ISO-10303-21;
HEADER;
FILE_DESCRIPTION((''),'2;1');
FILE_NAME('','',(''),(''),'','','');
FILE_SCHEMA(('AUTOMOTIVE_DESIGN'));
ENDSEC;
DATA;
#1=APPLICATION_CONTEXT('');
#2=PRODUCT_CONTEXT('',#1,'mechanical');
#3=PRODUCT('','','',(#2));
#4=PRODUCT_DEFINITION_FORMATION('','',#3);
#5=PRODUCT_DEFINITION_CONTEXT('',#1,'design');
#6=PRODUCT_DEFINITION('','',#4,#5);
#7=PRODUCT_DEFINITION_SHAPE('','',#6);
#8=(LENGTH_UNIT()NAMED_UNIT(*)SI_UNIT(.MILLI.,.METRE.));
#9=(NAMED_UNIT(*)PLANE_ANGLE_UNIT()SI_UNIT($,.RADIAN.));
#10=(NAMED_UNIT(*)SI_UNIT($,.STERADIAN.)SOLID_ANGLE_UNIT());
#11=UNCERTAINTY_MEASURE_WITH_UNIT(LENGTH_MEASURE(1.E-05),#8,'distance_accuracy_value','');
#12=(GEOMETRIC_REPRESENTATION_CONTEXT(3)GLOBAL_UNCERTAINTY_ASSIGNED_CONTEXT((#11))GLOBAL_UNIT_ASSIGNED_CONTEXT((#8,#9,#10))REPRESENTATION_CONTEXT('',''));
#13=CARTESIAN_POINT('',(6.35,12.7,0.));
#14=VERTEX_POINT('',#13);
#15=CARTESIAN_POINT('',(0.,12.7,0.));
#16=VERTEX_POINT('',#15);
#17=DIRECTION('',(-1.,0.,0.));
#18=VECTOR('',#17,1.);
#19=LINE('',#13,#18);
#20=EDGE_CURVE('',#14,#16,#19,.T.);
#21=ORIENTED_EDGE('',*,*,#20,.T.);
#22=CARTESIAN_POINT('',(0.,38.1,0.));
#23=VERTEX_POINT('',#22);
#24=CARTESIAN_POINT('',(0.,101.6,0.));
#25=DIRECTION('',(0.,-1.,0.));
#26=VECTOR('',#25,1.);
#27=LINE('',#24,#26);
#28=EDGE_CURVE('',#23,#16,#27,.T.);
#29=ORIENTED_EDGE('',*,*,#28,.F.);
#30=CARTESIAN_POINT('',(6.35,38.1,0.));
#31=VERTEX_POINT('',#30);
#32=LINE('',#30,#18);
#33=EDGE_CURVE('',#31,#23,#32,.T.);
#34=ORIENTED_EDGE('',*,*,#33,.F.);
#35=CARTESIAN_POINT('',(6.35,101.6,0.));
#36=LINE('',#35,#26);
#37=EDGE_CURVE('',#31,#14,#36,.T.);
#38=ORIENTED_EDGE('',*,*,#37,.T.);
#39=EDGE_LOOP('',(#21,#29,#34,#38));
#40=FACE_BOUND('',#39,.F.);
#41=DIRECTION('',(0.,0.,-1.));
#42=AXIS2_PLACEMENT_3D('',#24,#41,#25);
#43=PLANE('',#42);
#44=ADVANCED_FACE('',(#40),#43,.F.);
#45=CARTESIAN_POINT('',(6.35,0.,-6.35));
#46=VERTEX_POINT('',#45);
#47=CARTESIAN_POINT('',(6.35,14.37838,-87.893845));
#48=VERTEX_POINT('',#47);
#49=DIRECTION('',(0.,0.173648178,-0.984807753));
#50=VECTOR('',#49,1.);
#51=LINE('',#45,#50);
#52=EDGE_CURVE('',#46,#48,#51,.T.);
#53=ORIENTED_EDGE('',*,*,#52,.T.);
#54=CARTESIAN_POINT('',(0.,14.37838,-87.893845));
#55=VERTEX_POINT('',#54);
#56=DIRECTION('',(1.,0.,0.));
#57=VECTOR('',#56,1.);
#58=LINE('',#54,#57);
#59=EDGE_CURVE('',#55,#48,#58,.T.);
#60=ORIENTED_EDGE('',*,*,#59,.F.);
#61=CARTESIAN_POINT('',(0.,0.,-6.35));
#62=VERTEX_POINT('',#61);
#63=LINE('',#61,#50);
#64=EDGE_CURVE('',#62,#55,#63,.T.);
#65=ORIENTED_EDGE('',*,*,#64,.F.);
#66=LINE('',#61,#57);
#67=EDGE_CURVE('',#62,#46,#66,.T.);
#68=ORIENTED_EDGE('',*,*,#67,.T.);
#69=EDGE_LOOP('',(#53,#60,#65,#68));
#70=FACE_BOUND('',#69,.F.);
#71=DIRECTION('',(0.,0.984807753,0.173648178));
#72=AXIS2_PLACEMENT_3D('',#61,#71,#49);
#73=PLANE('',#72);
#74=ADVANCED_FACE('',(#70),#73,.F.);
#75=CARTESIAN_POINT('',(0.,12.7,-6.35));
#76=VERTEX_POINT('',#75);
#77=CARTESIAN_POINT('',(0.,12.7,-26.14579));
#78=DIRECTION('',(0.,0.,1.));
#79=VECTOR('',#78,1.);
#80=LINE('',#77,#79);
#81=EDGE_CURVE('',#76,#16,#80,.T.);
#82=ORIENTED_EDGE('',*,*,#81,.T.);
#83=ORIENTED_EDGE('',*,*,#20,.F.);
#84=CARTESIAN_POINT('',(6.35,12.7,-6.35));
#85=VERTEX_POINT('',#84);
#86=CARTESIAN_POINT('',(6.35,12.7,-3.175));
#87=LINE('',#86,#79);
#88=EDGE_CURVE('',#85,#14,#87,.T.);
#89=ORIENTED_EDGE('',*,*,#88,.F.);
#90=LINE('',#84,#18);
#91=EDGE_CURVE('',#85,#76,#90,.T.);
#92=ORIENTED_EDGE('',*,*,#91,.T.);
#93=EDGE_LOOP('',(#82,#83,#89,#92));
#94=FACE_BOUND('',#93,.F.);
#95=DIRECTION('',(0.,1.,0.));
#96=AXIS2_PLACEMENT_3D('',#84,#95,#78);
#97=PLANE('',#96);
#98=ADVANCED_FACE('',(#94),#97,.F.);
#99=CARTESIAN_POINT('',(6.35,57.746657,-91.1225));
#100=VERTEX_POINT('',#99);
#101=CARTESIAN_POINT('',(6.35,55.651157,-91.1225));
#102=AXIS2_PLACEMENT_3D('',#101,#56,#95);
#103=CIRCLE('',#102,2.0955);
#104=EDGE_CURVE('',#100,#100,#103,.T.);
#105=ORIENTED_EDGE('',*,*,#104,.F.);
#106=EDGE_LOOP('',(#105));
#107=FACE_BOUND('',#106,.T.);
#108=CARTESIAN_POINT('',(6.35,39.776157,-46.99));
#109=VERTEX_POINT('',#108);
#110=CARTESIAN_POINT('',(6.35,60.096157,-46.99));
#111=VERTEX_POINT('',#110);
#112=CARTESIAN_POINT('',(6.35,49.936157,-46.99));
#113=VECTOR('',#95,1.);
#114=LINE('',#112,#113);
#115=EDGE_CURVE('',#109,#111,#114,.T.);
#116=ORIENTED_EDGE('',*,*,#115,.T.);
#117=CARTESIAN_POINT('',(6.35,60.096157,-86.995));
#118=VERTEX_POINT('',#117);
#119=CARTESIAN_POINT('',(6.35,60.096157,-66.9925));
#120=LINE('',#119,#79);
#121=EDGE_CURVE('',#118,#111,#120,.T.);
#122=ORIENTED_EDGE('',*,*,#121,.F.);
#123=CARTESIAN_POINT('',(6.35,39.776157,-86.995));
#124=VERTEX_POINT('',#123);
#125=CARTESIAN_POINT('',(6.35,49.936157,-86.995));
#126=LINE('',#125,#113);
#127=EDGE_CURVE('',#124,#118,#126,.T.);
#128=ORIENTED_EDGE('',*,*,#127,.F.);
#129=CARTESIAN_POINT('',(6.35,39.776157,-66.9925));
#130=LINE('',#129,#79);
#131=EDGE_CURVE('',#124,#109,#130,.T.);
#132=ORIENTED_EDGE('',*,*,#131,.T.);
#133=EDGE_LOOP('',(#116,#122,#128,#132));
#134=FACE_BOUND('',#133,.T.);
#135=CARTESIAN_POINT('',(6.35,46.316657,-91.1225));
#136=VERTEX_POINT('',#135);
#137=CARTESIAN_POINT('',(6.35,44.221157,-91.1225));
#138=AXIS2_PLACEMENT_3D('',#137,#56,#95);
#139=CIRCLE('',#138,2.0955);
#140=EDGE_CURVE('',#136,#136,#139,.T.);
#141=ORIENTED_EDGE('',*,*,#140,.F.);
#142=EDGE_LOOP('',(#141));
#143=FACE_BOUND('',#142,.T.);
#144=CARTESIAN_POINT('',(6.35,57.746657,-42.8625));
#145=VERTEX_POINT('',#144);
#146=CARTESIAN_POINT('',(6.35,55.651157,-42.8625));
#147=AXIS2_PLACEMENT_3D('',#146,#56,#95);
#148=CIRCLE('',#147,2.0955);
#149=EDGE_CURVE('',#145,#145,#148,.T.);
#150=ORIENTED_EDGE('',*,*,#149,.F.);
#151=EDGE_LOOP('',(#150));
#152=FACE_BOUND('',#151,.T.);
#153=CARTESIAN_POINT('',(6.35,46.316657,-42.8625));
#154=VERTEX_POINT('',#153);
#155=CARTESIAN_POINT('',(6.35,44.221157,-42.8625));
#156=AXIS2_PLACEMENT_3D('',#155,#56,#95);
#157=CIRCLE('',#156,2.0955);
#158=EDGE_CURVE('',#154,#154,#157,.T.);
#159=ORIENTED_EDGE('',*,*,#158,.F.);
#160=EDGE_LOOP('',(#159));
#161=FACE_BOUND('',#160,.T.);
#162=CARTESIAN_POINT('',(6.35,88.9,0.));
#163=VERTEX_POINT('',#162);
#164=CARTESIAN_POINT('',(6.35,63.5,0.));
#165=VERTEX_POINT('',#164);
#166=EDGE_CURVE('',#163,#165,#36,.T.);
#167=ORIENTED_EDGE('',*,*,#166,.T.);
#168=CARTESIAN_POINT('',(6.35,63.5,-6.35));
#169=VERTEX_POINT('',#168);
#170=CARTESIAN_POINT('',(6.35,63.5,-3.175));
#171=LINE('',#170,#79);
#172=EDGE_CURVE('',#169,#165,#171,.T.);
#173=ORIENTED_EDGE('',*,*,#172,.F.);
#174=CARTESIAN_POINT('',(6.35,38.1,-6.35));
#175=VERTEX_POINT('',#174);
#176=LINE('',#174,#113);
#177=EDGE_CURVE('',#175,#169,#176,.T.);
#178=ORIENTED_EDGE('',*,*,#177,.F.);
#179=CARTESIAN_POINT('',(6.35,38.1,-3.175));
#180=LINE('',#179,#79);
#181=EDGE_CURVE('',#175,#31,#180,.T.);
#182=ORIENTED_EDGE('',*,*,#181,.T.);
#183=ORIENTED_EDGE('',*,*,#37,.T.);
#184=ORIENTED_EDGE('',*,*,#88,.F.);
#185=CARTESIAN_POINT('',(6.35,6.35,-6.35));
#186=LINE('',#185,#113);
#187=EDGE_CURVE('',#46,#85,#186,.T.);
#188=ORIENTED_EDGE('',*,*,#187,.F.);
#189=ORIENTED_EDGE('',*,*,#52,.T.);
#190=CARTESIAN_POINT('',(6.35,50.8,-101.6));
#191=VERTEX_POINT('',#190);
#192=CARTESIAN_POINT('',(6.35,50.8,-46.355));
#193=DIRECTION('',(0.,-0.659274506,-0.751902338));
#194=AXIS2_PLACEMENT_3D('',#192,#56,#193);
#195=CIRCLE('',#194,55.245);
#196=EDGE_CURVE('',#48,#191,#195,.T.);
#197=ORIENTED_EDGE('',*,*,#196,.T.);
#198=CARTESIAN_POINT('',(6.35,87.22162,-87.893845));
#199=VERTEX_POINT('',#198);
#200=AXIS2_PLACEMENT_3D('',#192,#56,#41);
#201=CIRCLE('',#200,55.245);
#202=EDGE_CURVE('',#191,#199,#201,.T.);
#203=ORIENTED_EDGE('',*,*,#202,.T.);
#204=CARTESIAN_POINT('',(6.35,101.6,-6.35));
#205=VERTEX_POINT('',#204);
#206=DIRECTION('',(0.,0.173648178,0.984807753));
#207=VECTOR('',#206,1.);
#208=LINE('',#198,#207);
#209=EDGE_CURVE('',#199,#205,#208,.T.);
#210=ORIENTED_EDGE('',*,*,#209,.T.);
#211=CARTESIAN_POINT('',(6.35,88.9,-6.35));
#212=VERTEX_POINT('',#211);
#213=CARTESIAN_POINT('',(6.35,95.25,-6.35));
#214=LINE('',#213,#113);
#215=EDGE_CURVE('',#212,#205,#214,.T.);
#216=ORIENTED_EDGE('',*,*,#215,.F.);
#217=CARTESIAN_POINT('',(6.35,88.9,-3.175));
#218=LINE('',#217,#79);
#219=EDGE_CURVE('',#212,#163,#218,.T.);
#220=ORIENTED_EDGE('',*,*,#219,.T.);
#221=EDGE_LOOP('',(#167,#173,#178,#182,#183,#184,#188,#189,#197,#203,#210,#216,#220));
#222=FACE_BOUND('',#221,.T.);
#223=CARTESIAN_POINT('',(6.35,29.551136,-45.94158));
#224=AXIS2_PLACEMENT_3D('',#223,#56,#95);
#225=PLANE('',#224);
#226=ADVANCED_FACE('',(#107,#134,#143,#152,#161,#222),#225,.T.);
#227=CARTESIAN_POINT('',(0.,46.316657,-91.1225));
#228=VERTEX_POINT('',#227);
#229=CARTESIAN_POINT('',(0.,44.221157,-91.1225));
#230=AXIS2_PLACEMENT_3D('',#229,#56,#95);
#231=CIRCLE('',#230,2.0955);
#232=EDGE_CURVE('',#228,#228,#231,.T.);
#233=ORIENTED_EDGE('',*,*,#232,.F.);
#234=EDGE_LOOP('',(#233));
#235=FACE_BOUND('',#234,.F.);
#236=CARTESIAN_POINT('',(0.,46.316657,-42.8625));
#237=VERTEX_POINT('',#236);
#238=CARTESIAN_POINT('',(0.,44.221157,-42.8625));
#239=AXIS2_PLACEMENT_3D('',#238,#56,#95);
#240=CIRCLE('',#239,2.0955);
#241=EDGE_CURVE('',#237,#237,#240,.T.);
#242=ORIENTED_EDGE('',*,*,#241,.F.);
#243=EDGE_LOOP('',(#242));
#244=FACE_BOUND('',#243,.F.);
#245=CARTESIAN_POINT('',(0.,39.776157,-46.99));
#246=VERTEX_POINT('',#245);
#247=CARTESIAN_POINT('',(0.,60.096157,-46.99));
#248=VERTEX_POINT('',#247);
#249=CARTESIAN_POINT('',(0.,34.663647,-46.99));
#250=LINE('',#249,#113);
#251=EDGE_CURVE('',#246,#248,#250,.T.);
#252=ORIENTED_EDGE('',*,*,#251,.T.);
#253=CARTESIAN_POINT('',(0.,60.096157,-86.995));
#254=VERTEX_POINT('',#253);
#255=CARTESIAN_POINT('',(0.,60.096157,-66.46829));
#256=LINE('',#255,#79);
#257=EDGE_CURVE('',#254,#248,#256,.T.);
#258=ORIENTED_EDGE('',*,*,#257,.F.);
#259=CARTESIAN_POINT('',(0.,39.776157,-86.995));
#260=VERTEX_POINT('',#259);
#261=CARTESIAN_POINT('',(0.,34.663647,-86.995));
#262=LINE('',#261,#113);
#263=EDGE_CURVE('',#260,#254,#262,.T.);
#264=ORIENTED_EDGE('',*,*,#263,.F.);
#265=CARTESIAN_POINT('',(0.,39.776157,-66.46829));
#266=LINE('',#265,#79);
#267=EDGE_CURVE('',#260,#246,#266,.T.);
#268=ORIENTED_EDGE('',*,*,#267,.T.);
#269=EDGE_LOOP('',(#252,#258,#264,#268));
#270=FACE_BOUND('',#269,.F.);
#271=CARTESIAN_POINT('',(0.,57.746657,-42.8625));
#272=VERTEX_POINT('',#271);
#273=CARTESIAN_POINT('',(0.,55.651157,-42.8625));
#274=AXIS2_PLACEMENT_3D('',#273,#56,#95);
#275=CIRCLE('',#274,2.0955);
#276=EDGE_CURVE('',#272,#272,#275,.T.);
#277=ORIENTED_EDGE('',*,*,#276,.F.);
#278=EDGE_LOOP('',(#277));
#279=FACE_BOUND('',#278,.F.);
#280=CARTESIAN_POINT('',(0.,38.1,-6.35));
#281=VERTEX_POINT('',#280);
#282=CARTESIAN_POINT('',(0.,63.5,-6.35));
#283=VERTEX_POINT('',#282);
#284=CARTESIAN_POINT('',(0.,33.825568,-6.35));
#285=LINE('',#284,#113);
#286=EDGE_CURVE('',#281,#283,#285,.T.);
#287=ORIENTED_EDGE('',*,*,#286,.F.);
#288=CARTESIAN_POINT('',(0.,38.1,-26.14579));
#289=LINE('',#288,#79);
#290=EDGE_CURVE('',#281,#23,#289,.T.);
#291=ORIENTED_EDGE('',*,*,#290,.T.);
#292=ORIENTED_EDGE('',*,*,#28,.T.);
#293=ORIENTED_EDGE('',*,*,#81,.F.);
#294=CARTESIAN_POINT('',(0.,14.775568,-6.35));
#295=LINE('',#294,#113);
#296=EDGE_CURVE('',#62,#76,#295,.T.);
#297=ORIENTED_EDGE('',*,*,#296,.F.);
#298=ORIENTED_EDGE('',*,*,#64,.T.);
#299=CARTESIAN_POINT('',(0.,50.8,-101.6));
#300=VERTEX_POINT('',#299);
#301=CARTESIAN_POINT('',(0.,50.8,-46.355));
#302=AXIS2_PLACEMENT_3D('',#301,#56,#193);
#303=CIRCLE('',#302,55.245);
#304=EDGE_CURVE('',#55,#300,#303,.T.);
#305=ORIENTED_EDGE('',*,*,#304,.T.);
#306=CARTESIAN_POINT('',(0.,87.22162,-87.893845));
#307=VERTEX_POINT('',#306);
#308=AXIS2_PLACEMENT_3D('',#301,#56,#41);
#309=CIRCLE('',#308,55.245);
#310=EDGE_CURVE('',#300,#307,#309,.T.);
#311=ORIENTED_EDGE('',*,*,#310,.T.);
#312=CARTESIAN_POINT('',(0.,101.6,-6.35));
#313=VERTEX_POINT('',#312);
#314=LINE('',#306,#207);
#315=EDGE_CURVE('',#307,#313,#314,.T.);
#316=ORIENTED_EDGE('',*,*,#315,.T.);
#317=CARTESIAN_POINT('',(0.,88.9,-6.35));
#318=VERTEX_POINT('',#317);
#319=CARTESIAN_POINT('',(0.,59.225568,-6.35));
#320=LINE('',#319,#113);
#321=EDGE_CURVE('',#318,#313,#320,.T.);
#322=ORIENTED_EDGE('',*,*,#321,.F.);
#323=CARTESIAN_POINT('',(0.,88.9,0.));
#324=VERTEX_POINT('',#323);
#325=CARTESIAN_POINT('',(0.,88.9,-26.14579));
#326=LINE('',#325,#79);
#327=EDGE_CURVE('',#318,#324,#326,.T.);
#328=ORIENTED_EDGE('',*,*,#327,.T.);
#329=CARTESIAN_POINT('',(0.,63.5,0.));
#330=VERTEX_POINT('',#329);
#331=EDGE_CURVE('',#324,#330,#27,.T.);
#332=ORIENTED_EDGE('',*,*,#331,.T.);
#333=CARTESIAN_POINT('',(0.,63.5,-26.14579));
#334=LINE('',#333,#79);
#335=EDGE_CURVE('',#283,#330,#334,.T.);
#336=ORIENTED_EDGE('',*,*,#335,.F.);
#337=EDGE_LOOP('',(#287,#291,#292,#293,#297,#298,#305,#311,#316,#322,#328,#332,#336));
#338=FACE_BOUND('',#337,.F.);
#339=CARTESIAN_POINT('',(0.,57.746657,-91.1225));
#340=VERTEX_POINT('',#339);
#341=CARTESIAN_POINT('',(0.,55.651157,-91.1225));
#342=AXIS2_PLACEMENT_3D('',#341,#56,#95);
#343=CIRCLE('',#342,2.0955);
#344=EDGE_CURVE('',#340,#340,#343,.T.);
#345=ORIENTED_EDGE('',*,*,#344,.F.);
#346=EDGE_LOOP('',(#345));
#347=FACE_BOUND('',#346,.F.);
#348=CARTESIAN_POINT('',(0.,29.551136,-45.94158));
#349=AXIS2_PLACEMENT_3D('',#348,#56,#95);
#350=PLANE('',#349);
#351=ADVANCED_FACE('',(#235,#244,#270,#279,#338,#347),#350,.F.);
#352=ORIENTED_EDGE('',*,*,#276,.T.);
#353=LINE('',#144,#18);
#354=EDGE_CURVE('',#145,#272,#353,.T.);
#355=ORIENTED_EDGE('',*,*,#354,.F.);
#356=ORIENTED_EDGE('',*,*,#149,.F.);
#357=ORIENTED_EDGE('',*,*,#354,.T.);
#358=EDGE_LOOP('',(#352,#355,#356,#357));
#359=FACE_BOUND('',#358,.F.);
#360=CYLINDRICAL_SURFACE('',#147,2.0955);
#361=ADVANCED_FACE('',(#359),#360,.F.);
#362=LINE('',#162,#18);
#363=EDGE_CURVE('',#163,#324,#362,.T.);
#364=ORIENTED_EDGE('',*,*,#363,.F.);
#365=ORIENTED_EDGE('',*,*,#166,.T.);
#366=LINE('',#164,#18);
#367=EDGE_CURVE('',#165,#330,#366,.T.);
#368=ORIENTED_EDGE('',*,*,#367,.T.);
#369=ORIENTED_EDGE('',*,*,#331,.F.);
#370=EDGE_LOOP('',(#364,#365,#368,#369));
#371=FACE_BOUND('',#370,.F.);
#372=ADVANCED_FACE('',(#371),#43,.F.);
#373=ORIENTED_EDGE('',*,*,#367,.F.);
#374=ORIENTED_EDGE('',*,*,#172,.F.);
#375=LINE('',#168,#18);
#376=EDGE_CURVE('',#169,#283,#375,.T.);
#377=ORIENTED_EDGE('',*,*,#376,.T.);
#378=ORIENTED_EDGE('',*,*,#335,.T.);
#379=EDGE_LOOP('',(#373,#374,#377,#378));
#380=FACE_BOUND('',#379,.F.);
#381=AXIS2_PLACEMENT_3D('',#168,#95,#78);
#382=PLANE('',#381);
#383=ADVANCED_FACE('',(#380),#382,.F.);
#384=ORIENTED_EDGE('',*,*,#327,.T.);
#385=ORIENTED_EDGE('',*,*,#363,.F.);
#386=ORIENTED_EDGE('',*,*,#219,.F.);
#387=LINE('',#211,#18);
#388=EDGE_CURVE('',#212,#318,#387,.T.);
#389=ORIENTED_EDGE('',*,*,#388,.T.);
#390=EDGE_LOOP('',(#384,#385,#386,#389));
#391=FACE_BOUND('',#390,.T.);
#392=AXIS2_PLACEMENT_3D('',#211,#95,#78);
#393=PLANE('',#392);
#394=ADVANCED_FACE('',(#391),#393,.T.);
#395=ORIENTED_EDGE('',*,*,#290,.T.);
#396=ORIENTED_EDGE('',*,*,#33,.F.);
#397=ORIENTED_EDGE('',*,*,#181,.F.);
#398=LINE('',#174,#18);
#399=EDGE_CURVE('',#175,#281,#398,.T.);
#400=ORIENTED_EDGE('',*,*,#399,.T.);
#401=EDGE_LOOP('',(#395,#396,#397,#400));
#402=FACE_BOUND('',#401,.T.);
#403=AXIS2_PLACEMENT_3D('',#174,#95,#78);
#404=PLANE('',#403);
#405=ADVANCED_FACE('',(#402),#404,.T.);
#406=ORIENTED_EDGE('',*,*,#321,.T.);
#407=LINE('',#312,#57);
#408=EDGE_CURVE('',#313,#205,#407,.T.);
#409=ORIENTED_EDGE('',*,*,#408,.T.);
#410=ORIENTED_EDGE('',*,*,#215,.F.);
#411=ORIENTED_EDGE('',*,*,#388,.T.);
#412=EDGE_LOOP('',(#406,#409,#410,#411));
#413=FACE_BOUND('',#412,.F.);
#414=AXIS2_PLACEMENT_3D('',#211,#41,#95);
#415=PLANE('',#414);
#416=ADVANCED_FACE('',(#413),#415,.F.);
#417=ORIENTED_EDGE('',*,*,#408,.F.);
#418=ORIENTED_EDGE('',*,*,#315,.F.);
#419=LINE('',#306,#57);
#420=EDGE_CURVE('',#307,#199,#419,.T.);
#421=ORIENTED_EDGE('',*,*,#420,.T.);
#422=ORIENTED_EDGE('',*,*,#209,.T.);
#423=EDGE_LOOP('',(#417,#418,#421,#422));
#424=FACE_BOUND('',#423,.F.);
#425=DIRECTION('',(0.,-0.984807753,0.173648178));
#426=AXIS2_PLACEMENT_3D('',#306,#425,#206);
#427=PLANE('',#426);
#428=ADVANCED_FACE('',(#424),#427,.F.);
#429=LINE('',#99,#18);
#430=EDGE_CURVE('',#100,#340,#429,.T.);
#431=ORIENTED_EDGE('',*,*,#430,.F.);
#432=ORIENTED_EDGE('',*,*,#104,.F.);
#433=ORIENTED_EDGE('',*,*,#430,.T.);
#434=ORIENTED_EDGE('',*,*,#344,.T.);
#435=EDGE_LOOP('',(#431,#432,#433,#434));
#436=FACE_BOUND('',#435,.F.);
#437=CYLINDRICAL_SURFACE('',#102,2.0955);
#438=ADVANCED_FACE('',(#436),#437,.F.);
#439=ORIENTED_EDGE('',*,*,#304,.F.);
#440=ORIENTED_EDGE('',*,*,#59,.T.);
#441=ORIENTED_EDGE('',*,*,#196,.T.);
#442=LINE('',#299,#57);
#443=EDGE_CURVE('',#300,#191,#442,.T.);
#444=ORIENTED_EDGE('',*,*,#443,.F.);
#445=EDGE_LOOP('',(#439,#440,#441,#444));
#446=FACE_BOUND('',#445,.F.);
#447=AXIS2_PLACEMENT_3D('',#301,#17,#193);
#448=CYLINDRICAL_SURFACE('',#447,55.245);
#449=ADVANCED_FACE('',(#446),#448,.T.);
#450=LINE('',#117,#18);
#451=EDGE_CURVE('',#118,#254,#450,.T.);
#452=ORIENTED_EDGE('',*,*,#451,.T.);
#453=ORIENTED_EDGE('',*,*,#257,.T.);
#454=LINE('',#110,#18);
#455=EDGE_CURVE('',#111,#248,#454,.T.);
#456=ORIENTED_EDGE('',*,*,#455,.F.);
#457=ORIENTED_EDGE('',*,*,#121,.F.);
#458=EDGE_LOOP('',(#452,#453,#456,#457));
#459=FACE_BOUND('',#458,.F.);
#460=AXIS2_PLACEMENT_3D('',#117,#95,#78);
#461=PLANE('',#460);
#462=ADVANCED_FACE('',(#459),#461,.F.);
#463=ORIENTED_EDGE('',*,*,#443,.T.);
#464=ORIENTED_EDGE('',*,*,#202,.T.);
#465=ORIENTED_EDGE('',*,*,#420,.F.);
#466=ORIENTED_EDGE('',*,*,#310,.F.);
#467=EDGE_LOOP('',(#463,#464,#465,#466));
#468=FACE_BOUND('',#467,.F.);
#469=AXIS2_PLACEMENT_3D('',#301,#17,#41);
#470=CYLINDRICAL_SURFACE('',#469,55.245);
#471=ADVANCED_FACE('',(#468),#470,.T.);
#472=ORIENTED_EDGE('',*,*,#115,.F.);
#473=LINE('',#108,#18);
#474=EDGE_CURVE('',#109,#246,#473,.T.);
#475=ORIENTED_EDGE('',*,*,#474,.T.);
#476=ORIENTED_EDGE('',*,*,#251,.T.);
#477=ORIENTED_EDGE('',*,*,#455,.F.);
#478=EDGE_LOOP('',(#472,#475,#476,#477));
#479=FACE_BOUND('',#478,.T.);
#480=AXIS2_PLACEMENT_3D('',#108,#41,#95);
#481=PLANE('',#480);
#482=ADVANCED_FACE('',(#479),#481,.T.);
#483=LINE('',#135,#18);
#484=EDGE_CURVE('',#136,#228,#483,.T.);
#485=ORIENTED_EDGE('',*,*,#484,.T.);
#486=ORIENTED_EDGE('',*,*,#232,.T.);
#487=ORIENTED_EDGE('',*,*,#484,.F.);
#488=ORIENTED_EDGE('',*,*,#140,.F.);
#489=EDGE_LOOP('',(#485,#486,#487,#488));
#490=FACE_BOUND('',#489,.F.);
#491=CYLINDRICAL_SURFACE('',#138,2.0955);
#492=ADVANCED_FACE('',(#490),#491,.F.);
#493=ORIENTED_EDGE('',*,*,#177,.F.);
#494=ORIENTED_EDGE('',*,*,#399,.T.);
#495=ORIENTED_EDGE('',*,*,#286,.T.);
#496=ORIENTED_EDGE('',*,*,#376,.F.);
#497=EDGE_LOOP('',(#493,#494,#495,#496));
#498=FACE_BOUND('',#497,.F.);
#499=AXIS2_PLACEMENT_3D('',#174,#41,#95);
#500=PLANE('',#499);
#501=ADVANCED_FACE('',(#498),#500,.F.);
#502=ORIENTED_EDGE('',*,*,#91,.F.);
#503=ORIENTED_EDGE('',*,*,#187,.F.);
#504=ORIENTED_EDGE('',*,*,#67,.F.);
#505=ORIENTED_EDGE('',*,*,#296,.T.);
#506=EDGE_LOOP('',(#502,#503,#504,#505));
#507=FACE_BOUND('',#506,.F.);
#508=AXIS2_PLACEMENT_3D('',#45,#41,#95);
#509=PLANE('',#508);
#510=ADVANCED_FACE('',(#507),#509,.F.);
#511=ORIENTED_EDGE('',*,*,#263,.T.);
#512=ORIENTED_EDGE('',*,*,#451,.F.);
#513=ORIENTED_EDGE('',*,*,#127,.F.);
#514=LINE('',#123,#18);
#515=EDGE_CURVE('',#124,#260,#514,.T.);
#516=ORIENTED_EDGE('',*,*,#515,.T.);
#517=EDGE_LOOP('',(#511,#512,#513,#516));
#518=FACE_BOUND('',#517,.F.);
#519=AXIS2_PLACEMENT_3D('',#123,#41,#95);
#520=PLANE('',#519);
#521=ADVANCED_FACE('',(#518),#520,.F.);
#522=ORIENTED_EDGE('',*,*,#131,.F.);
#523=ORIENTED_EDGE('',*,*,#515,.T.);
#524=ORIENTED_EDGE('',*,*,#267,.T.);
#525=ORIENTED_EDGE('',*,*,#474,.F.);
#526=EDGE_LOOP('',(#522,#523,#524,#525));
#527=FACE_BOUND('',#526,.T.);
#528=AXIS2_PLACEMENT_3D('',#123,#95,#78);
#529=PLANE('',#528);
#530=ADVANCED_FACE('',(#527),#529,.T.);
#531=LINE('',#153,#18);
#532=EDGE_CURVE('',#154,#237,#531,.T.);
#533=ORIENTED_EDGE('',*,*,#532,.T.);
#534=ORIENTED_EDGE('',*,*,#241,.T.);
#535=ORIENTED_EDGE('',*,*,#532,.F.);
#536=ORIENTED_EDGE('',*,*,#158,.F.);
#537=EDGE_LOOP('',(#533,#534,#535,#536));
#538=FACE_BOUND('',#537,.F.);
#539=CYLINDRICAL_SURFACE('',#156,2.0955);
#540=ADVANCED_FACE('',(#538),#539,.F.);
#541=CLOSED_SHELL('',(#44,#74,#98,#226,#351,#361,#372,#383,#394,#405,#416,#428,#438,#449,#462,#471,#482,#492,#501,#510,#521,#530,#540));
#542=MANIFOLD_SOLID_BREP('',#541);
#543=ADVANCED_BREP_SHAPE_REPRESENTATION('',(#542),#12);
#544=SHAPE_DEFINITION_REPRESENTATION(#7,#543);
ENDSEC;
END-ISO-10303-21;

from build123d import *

# Parameters (mm, degrees)
F1_DEPTH = 6.35
F2_W     = 12.7
F2_H     = 6.35
F3_DEPTH = 25.4
F4_W     = 20.32
F4_H     = 40.005
F4_R     = 2.0955
F5_DEPTH = 25.4


# Not quite as in the source:
# - a feature names something its author has since deleted; it is built from what else it names


with BuildPart() as f1:
    # F0 (on Right) → F1 (new body)
    with BuildSketch(Plane.YZ):
        with BuildLine():
            Line((50.8, 0), (0, 0))
            Line((0, 0), (0, -6.35))
            Line((0, -6.35), (14.3783799252, -87.8938446653))
            ThreePointArc((14.3783799252, -87.8938446653), (31.3423979963, -98.0600456848), (50.8, -101.6))
            Line((50.8, -101.6), (50.8, 0))
        make_face()
        with BuildLine():
            Line((101.6, 0), (50.8, 0))
            Line((50.8, 0), (50.8, -101.6))
            ThreePointArc((50.8, -101.6), (70.2576020037, -98.0600456848), (87.2216200748, -87.8938446653))
            Line((87.2216200748, -87.8938446653), (101.6, -6.35))
            Line((101.6, -6.35), (101.6, 0))
        make_face()
    extrude(amount=F1_DEPTH)

    # F2 (on face) → F3 (cut)
    with BuildSketch(Plane.YZ.offset(6.35)):
        with Locations((95.25, -3.175)):
            Rectangle(F2_W, F2_H)
        with Locations((44.45, -3.175)):
            Rectangle(F2_W, F2_H)
        with Locations((6.35, -3.175)):
            Rectangle(F2_W, F2_H)
        with Locations((57.15, -3.175)):
            Rectangle(F2_W, F2_H)
    extrude(amount=-F3_DEPTH, mode=Mode.SUBTRACT)

    # F4 (on face) → F5 (cut)
    with BuildSketch(Plane.YZ.offset(6.35)):
        with Locations((49.9361574873, -66.9925)):
            Rectangle(F4_W, F4_H)
        with Locations((44.2211574873, -42.8625)):
            Circle(F4_R)
        with Locations((55.6511574873, -42.8625)):
            Circle(F4_R)
        with Locations((55.6511574873, -91.1225)):
            Circle(F4_R)
        with Locations((44.2211574873, -91.1225)):
            Circle(F4_R)
    extrude(amount=-F5_DEPTH, mode=Mode.SUBTRACT)


solid = f1.part
